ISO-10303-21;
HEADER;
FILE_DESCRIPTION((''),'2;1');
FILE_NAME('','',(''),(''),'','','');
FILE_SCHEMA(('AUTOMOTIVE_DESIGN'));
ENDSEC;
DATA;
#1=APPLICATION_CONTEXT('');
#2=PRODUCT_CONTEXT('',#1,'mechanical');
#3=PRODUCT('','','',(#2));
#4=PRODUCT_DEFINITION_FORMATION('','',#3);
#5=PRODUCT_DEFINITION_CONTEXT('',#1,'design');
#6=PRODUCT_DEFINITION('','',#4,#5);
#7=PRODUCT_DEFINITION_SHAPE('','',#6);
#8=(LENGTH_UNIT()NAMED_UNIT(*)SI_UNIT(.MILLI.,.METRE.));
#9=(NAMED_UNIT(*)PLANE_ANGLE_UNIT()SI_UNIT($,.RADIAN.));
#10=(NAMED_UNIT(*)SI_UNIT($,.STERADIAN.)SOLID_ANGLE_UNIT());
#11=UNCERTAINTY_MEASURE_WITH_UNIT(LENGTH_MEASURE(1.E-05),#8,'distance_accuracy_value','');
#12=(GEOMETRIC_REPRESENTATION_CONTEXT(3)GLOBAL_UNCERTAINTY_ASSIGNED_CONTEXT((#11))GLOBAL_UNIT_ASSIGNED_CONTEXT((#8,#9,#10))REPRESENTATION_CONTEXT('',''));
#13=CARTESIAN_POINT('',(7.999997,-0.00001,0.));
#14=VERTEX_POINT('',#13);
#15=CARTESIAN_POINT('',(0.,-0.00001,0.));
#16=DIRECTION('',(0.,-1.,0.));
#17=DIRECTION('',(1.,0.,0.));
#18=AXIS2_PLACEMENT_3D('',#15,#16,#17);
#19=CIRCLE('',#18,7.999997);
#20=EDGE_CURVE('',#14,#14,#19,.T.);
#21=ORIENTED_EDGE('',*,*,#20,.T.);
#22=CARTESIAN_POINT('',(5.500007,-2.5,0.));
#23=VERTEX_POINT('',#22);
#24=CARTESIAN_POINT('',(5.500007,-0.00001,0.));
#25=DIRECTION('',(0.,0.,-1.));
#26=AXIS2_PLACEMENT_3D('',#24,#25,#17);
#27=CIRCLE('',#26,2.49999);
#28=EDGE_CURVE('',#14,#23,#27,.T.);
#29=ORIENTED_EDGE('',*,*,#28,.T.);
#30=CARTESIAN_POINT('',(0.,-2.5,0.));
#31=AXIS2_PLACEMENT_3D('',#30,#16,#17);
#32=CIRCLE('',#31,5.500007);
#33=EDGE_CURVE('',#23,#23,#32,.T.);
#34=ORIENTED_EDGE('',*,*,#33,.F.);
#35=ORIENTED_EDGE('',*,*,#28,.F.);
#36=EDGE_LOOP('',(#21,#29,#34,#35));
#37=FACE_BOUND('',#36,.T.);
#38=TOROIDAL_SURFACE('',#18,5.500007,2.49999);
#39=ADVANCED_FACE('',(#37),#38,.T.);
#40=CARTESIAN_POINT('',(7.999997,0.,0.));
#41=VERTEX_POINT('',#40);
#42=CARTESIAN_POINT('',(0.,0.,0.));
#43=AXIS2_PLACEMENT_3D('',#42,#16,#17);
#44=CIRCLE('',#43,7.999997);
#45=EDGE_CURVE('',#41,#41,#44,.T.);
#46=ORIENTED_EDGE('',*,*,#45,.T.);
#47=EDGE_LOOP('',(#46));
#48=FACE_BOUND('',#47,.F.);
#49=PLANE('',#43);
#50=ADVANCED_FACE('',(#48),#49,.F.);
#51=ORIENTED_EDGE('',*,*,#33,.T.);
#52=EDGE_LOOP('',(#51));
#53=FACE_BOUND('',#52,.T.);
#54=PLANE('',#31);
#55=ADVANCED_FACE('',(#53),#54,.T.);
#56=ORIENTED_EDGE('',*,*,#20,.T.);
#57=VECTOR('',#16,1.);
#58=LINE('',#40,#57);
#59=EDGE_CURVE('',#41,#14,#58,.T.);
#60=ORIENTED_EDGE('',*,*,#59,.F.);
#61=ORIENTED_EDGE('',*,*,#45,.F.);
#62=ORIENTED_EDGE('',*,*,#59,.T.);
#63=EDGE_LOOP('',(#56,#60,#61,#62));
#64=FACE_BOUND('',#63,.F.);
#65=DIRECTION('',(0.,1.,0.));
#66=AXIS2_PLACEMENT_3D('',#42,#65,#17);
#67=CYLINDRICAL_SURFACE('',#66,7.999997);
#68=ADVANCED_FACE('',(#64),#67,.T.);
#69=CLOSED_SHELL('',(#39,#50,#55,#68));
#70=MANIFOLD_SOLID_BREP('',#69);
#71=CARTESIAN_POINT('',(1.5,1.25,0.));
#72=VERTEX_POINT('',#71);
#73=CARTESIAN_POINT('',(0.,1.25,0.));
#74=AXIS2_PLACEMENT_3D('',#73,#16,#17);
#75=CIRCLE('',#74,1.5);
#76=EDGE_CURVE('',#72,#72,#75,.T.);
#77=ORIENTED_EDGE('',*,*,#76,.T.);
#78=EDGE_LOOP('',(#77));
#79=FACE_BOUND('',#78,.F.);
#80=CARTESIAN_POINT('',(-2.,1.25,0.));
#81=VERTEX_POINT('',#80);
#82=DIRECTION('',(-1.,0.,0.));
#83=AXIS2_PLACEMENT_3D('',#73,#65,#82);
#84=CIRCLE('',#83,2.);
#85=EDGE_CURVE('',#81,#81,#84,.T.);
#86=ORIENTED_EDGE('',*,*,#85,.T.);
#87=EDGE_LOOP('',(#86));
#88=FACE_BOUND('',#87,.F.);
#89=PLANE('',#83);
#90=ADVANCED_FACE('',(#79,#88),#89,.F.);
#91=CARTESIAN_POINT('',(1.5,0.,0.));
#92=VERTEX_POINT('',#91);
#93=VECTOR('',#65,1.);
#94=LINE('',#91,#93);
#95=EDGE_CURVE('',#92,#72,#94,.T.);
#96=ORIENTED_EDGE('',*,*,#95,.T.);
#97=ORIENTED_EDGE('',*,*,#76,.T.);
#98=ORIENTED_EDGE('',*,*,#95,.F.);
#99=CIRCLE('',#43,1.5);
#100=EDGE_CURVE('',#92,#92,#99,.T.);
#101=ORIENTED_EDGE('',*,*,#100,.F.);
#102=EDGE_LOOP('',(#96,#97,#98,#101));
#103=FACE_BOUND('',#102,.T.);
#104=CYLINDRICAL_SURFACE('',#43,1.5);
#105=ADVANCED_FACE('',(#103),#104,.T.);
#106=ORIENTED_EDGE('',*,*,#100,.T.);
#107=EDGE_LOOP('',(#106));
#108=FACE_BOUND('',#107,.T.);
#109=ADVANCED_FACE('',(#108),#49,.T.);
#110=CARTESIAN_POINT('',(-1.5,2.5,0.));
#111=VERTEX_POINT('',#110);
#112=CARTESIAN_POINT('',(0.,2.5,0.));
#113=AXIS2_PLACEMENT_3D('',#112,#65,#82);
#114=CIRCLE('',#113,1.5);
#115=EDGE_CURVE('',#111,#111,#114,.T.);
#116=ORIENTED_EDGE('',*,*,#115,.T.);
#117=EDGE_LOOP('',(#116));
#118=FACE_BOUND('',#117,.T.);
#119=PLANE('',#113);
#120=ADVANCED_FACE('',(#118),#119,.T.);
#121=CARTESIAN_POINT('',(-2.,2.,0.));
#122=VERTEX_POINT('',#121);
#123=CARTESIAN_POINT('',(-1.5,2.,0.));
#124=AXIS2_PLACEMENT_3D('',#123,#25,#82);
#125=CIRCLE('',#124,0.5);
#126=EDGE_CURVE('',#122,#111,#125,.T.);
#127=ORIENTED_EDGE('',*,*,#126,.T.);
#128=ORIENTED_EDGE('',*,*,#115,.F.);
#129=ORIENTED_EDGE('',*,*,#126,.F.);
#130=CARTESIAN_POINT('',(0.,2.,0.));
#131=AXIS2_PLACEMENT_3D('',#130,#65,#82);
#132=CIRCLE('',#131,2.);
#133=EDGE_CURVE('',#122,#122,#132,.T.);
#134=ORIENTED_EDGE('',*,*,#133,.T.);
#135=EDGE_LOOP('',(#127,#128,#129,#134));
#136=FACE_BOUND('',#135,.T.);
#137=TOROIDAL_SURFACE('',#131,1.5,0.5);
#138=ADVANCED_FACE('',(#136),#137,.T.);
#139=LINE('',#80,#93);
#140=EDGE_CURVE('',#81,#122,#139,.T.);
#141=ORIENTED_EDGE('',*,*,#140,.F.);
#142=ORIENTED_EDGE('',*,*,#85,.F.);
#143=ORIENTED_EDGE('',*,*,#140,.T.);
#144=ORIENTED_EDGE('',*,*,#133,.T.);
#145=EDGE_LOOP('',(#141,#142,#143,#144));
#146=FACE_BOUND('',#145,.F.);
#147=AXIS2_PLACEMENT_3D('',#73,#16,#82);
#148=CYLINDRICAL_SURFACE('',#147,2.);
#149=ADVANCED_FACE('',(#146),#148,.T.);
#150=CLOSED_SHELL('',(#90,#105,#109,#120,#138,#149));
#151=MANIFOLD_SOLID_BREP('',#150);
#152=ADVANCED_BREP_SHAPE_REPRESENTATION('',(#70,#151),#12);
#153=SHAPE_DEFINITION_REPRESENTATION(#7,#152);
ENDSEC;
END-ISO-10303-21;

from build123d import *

# Parameters (mm, degrees)
F0_R     = 7.9999967
F1_DEPTH = 2.5
F2_R     = 2.49999
F3_R     = 1.5
F4_DEPTH = 1.25
F5_R     = 2
F6_DEPTH = 1.25
F7_R     = 0.5


# Not quite as in the source:
# - a fillet or chamfer is up to 0.001 mm smaller than in the source, because OpenCascade refuses the exact size


with BuildPart() as f1:
    # F0 (on Front) → F1 (new body)
    with BuildSketch(Plane.XZ):
        Circle(F0_R)
    extrude(amount=F1_DEPTH)

    # F2 (radius 2.5 in the source; OpenCascade refuses exactly that, so slightly less here)
    f2_edges = [f1.edges().sort_by_distance(p)[0] for p in [
        (-7.999997, -2.5, 0),
    ]]
    fillet(f2_edges, radius=F2_R)


with BuildPart() as f4:
    # F3 (on Front) → F4 (new body)
    with BuildSketch(Plane.XZ):
        Circle(F3_R)
    extrude(amount=-F4_DEPTH)

    # F5 (on face) → F6 (join)
    with BuildSketch(Plane(origin=(0, 1.25, 0), x_dir=(-1, 0, 0), z_dir=(0, 1, 0))):
        Circle(F5_R)
    extrude(amount=F6_DEPTH)

    # F7
    f7_edges = [f4.edges().sort_by_distance(p)[0] for p in [
        (2, 2.5, 0),
    ]]
    fillet(f7_edges, radius=F7_R)


solid = Compound([f1.part, f4.part])
